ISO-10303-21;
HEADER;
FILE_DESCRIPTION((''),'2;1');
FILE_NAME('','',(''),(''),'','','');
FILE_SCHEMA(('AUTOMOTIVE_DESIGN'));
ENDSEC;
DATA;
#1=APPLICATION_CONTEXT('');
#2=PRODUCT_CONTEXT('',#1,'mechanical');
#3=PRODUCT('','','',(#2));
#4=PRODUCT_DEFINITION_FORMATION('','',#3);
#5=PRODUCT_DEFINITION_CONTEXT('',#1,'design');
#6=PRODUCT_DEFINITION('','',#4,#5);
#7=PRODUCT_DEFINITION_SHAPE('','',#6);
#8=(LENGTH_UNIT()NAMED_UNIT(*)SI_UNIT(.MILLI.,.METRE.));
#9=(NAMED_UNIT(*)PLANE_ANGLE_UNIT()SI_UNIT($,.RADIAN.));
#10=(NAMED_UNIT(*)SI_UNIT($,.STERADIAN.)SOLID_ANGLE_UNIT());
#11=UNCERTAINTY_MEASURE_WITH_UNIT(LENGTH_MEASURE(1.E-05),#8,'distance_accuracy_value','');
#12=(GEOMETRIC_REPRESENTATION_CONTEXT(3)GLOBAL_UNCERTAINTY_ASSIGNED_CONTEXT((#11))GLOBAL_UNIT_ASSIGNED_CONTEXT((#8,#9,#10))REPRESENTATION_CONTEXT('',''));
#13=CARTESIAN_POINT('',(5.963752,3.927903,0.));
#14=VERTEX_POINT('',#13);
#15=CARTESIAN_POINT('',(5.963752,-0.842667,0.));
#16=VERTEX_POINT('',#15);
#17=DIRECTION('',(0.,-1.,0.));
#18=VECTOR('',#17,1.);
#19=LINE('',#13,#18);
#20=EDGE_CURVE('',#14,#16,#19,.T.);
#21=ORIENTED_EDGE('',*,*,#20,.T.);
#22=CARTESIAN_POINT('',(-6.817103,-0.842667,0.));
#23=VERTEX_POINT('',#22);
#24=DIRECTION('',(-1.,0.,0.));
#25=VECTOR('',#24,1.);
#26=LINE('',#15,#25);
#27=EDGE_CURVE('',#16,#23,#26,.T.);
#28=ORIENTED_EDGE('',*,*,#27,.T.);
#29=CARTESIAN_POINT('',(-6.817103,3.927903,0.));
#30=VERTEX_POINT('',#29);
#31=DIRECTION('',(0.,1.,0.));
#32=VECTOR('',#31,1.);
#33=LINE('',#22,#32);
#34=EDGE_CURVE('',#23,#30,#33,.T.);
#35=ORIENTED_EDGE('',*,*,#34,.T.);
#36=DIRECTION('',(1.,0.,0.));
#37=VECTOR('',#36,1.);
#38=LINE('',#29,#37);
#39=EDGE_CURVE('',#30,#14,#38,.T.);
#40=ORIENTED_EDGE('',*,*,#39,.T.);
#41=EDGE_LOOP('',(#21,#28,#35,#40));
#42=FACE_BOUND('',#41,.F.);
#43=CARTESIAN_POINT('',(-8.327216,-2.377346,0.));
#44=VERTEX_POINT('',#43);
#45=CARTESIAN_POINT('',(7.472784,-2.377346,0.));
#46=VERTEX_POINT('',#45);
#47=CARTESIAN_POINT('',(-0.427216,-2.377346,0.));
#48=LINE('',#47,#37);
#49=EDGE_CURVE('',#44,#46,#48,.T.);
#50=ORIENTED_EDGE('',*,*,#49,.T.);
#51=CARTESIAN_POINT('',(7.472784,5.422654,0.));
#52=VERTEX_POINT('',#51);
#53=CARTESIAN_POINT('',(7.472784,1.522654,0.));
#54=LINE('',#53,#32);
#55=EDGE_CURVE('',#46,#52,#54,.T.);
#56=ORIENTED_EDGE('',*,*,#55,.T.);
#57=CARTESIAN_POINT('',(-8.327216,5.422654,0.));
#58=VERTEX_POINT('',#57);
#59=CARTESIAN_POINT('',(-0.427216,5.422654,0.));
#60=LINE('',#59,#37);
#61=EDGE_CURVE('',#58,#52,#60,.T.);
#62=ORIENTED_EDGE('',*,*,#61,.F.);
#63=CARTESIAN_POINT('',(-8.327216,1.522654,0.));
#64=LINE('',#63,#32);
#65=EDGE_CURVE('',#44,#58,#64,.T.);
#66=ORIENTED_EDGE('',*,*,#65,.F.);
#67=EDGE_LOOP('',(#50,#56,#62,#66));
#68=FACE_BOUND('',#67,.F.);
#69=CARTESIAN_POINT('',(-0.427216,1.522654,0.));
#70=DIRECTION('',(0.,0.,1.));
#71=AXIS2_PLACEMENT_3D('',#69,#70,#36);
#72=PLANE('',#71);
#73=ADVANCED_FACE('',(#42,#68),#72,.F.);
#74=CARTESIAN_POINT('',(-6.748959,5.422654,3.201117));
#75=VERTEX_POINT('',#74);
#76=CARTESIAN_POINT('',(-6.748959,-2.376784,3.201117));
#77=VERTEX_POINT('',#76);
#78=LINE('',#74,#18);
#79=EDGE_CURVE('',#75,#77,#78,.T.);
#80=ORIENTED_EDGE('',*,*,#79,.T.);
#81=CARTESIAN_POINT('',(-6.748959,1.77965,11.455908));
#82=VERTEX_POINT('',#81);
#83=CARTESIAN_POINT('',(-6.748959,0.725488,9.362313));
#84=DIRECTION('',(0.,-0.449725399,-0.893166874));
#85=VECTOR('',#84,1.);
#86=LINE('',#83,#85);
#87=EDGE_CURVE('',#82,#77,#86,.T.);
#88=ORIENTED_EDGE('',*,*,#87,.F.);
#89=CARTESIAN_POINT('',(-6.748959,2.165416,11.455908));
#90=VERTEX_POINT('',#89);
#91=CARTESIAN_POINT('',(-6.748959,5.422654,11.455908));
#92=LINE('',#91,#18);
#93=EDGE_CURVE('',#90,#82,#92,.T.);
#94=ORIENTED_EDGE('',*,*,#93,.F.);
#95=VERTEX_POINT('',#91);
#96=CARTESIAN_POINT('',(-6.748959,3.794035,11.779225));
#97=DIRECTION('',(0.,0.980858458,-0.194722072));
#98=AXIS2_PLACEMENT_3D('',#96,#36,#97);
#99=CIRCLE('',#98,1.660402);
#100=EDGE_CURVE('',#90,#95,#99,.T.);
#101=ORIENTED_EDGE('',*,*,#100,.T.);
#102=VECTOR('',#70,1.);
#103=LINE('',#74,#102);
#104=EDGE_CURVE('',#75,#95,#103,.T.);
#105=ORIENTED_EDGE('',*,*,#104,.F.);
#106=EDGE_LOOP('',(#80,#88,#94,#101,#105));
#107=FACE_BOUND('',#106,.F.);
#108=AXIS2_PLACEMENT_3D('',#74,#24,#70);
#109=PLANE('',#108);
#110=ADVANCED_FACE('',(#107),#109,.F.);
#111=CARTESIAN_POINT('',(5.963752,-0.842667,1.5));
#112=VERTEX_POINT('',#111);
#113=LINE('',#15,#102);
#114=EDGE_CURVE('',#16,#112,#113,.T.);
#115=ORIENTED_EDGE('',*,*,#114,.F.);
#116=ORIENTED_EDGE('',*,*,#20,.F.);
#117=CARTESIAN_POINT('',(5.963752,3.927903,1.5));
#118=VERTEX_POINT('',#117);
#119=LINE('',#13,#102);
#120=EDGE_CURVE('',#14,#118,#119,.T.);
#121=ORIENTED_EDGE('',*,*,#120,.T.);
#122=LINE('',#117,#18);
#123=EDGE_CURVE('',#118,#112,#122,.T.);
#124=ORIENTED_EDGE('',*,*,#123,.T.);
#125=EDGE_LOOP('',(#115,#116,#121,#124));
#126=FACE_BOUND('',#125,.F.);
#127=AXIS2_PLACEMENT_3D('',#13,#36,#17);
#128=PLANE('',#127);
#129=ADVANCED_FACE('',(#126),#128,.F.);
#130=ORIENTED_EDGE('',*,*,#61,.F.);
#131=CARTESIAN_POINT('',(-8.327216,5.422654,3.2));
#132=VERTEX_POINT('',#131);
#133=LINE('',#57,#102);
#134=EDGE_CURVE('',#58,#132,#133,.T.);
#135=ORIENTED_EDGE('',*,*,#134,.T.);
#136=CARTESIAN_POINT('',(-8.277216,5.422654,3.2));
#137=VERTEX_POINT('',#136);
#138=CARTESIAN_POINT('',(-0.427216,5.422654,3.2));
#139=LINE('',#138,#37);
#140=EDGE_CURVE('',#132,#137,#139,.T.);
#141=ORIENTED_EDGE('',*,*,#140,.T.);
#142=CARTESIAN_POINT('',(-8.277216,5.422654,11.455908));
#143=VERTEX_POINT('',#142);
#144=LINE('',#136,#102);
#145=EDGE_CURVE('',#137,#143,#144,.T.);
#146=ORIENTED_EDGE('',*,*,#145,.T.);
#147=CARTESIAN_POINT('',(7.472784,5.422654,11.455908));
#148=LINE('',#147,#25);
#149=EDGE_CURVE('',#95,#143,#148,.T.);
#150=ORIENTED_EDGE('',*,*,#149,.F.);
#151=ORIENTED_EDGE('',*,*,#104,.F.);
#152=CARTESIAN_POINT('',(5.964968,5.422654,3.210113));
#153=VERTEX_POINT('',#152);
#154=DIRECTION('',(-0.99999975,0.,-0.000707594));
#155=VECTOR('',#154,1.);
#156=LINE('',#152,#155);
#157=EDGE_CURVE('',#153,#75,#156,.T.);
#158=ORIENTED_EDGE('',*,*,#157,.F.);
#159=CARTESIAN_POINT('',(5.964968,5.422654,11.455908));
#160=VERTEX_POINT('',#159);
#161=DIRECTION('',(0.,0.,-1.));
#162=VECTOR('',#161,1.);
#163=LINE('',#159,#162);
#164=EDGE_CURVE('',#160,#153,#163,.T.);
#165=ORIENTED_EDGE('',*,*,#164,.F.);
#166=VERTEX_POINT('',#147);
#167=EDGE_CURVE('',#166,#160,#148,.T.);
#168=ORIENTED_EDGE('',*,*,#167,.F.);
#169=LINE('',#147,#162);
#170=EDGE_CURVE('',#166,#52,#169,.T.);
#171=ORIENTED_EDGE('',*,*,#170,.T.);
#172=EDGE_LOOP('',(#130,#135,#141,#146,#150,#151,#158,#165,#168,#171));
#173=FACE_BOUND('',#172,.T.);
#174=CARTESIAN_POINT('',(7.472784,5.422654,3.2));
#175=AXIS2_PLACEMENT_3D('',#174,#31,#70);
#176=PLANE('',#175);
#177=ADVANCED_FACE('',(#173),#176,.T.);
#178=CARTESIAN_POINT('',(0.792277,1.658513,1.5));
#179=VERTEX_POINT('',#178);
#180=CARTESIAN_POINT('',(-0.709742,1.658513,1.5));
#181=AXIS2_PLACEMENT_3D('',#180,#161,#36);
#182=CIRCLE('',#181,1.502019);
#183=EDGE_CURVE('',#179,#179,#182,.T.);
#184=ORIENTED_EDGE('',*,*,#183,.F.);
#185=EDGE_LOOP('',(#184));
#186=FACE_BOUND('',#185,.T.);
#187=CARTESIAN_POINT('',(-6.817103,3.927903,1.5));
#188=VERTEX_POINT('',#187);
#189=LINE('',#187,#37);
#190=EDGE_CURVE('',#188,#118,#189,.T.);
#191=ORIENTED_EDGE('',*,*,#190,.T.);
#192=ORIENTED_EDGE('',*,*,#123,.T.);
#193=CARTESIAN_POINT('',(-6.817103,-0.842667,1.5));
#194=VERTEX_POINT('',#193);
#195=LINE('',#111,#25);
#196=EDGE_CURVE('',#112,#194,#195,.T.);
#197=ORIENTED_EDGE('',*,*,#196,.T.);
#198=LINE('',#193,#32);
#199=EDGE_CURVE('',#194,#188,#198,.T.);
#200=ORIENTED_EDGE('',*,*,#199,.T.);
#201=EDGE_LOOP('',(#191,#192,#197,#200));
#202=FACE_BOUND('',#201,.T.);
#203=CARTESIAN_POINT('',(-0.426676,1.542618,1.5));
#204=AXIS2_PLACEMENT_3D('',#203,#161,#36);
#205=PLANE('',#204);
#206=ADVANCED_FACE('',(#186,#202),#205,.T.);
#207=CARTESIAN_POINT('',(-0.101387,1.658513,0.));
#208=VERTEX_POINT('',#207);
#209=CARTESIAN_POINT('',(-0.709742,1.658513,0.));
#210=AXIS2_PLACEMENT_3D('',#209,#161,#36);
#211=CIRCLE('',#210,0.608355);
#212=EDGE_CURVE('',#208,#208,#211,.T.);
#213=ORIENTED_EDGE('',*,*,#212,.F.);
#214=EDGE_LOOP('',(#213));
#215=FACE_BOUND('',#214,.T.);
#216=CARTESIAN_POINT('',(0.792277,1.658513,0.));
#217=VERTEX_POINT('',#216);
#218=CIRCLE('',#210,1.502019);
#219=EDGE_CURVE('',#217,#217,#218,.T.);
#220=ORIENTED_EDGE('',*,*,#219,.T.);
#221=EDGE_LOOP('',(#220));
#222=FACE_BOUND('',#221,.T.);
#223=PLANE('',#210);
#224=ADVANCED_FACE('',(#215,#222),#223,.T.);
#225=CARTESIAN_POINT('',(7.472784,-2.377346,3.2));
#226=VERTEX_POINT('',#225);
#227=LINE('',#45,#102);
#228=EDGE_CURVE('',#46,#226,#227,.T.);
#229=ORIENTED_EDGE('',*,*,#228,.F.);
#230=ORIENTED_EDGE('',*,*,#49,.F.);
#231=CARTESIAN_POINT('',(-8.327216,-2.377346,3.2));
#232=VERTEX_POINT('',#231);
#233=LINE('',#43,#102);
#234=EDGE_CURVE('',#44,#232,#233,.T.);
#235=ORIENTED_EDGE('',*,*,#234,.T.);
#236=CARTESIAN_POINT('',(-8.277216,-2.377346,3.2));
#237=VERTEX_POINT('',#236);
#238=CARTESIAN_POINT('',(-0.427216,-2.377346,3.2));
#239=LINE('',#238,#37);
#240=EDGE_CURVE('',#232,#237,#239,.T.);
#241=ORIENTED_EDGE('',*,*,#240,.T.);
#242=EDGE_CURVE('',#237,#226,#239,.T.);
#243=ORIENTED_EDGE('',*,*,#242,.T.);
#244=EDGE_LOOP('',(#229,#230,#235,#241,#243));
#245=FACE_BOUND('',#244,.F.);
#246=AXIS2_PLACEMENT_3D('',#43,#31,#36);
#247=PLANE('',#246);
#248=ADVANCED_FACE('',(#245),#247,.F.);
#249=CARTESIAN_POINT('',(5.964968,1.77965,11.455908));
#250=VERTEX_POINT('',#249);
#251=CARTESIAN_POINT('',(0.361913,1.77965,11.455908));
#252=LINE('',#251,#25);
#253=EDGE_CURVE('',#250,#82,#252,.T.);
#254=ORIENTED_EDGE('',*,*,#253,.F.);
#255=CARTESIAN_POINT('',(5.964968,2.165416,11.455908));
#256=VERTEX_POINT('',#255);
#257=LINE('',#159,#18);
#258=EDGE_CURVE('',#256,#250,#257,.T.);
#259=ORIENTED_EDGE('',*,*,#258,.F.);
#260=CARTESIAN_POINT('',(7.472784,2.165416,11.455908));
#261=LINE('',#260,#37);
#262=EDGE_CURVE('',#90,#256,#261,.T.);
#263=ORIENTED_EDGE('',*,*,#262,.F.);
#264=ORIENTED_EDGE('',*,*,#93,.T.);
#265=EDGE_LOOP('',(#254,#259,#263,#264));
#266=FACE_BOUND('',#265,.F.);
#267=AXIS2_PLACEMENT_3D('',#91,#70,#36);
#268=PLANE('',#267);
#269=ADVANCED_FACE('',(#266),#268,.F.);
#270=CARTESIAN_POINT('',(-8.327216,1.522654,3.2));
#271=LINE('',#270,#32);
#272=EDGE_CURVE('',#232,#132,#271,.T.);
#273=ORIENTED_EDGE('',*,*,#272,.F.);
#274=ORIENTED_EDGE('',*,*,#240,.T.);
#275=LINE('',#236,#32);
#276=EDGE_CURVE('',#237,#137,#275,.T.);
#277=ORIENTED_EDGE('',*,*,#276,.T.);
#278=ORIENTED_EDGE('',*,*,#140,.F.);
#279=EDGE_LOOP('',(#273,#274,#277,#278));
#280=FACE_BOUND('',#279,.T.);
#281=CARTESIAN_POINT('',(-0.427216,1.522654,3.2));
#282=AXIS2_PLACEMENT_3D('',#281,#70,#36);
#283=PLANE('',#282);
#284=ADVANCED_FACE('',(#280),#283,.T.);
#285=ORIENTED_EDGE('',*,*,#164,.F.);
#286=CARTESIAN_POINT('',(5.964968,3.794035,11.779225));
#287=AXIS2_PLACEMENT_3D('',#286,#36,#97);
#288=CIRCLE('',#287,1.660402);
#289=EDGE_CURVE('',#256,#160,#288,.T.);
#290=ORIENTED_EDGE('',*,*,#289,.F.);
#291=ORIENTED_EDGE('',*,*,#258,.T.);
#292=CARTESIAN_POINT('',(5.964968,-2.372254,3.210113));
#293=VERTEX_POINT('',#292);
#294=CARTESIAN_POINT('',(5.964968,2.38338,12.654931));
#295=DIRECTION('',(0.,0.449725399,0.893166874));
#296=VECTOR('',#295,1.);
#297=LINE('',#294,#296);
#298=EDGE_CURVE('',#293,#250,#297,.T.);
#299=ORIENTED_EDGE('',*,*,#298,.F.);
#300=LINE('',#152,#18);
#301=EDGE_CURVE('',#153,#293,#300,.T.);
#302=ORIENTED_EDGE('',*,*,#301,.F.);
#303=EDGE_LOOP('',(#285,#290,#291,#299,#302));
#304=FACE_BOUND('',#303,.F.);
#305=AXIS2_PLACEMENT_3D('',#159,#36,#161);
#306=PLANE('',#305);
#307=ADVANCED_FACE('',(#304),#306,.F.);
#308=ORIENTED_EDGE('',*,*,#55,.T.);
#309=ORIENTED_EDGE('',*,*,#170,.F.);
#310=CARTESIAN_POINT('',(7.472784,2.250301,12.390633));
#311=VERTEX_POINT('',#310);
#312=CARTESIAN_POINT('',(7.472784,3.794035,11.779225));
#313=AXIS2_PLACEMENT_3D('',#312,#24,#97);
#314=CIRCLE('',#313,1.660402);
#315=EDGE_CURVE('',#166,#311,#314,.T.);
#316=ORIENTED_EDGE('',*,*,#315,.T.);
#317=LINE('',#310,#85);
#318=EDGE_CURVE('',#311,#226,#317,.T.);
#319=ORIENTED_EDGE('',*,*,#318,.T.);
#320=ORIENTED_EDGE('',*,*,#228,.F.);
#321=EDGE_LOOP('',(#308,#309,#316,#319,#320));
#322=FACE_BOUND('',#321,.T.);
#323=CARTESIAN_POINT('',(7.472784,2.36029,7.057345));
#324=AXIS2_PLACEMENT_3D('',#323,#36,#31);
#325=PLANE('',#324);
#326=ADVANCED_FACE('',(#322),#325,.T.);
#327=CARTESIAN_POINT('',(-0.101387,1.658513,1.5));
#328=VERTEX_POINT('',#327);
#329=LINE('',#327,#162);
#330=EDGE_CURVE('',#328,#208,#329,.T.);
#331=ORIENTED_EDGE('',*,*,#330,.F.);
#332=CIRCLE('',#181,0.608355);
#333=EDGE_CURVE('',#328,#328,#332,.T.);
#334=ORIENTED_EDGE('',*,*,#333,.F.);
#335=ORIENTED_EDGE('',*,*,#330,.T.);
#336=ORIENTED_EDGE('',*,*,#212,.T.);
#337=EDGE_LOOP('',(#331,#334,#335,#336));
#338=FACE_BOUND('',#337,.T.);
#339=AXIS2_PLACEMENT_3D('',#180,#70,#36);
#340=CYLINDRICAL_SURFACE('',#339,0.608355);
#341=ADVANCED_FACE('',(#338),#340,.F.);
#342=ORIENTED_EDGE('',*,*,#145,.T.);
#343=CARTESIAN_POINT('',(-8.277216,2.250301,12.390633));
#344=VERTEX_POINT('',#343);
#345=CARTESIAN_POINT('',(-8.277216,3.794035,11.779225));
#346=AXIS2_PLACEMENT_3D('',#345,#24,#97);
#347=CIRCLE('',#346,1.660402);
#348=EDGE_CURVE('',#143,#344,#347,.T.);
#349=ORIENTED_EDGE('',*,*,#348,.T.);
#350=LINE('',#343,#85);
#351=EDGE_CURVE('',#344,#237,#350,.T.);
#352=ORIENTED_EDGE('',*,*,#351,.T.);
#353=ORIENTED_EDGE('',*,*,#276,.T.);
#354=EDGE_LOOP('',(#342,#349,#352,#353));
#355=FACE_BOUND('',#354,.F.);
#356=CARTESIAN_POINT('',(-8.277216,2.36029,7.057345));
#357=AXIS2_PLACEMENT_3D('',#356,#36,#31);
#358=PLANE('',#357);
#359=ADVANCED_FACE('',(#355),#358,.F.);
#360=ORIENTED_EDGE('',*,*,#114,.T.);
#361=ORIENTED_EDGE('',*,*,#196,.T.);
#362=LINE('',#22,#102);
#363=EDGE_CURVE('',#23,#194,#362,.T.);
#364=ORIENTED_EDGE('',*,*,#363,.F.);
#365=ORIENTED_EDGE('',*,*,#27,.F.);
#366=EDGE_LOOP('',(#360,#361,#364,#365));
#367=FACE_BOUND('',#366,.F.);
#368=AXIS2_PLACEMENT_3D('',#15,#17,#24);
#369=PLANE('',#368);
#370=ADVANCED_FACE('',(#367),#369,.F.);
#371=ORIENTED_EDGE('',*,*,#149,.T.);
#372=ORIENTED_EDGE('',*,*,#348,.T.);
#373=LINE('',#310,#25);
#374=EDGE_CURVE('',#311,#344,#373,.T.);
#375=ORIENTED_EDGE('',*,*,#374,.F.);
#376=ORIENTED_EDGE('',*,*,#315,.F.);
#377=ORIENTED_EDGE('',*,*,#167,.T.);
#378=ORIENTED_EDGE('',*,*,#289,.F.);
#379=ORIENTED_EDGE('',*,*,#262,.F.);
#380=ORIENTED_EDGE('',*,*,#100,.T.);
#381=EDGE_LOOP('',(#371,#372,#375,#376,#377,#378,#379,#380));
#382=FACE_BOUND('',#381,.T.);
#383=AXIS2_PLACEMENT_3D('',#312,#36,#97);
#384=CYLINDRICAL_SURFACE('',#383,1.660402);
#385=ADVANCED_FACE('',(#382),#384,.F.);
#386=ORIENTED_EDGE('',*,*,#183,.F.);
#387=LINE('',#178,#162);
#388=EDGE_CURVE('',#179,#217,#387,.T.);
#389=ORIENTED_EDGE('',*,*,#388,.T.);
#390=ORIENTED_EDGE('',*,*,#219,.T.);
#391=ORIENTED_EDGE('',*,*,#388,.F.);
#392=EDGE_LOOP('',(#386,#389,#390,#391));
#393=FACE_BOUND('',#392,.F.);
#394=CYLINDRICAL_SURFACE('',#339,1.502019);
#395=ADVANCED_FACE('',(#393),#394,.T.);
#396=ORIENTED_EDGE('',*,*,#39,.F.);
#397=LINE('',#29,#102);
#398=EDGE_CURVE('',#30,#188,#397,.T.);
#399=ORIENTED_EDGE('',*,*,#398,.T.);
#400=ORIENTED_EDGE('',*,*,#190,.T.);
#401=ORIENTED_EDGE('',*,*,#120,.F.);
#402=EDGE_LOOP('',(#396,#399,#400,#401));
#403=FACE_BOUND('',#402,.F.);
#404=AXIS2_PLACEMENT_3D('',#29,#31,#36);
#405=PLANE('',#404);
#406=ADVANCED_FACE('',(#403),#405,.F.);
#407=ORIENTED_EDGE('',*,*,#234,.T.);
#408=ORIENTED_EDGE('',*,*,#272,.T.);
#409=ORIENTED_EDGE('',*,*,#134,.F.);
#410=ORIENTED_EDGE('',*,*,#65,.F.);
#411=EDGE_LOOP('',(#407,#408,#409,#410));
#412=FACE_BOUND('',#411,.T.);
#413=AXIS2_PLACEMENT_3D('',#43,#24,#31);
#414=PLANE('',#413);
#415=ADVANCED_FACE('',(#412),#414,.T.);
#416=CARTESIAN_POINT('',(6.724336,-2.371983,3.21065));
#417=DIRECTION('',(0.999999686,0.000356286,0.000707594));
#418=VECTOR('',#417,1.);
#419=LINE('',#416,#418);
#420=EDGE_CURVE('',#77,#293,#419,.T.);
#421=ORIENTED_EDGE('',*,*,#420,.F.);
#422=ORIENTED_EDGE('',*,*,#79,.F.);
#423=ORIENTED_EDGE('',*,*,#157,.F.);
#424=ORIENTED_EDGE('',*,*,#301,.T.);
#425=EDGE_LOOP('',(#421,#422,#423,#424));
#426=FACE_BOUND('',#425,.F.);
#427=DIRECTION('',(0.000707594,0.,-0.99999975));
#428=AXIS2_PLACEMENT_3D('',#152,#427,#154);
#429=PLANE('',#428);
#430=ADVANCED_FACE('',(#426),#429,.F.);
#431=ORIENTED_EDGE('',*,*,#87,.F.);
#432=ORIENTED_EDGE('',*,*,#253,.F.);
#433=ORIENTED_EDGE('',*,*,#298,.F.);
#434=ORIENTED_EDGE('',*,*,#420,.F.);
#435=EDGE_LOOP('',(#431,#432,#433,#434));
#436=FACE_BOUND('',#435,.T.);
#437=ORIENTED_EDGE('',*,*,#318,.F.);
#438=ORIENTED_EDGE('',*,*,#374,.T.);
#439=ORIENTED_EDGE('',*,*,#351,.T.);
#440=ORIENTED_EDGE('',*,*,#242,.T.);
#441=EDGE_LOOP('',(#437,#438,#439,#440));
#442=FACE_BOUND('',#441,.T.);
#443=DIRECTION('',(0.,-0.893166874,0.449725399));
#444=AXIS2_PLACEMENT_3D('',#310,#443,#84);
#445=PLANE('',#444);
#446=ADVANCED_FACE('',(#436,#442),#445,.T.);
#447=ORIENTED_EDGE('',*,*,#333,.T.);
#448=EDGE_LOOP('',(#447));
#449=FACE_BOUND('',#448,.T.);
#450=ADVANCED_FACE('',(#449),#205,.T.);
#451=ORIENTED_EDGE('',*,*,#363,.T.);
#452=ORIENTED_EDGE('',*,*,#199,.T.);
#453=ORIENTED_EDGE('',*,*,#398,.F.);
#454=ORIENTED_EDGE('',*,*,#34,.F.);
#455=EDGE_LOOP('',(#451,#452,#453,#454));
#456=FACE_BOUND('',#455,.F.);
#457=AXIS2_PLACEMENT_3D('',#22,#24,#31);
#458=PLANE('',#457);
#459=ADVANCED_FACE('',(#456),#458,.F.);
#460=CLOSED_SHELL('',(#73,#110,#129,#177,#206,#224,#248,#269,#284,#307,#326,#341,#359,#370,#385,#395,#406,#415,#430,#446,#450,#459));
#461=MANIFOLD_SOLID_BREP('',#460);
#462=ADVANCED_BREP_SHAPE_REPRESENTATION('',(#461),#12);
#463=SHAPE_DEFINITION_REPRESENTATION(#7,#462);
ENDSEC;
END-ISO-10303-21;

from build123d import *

# Parameters (mm, degrees)
F0_W      = 15.8
F0_H      = 7.8
F1_DEPTH  = 3.2
F3_DEPTH  = 1.5
F4_R      = 1.5020190756
F4_R_2    = 0.6083547137
F5_DEPTH  = 1.5
F7_DEPTH  = 15.75
F10_DEPTH = 25


# Not quite as in the source:
# - the program builds the solid bodies; features that only make, move or delete a surface that nothing else refers to are left out


with BuildPart() as f1:
    # F0 (on Top) → F1 (new body)
    with BuildSketch(Plane.XY):
        with Locations((-0.4272158258, 1.5226540988)):
            Rectangle(F0_W, F0_H)
    extrude(amount=F1_DEPTH)

    # F2 (on face) → F3 (cut)
    with BuildSketch(Plane(origin=(0, 0, 0), x_dir=(1, 0, 0), z_dir=(0, 0, -1))):
        Polygon((-0.8716915618, 0.8426669519), (-6.8171033636, 0.8426669519), (-6.8171033636, -1.5226540988), (-6.8171033636, -3.9279027842), (-0.4272158258, -3.9279027842), (5.9637515806, -3.9279027842), (5.9637515806, -1.5226540988), (5.9637515806, 0.8426669519), align=None)
    extrude(amount=-F3_DEPTH, mode=Mode.SUBTRACT)

    # F4 (on face) → F5 (join)
    with BuildSketch(Plane(origin=(0, 0, 1.5), x_dir=(1, 0, 0), z_dir=(0, 0, -1))):
        with Locations((-0.7097416674, -1.6585130943)):
            Circle(F4_R)
        with Locations((-0.7097416674, -1.6585130943)):
            Circle(F4_R_2, mode=Mode.SUBTRACT)
    extrude(amount=F5_DEPTH)

    # F6 (on face) → F7 (join)
    with BuildSketch(Plane.YZ.offset(7.4727841742)):
        with BuildLine():
            Line((-2.3773459012, 3.2), (5.4226540988, 3.2))
            Line((5.4226540988, 3.2), (5.4226540988, 11.4559076203))
            ThreePointArc((5.4226540988, 11.4559076203), (3.3247489231, 10.1865208896), (2.2503013028, 12.3906332074))
            Line((2.2503013028, 12.3906332074), (-2.3773459012, 3.2))
        make_face()
    extrude(amount=-F7_DEPTH)

    # F9 (on face) → F10 (cut)
    with BuildSketch(Plane(origin=(0, 5.4226540988, 0), x_dir=(-1, 0, 0), z_dir=(0, 1, 0))):
        Polygon((-5.9649683535, 11.4559076203), (-5.9649683535, 3.21011306), (6.7489589565, 3.2011167647), (6.7489589565, 11.4559076203), align=None)
    extrude(amount=-F10_DEPTH, mode=Mode.SUBTRACT)


solid = f1.part
